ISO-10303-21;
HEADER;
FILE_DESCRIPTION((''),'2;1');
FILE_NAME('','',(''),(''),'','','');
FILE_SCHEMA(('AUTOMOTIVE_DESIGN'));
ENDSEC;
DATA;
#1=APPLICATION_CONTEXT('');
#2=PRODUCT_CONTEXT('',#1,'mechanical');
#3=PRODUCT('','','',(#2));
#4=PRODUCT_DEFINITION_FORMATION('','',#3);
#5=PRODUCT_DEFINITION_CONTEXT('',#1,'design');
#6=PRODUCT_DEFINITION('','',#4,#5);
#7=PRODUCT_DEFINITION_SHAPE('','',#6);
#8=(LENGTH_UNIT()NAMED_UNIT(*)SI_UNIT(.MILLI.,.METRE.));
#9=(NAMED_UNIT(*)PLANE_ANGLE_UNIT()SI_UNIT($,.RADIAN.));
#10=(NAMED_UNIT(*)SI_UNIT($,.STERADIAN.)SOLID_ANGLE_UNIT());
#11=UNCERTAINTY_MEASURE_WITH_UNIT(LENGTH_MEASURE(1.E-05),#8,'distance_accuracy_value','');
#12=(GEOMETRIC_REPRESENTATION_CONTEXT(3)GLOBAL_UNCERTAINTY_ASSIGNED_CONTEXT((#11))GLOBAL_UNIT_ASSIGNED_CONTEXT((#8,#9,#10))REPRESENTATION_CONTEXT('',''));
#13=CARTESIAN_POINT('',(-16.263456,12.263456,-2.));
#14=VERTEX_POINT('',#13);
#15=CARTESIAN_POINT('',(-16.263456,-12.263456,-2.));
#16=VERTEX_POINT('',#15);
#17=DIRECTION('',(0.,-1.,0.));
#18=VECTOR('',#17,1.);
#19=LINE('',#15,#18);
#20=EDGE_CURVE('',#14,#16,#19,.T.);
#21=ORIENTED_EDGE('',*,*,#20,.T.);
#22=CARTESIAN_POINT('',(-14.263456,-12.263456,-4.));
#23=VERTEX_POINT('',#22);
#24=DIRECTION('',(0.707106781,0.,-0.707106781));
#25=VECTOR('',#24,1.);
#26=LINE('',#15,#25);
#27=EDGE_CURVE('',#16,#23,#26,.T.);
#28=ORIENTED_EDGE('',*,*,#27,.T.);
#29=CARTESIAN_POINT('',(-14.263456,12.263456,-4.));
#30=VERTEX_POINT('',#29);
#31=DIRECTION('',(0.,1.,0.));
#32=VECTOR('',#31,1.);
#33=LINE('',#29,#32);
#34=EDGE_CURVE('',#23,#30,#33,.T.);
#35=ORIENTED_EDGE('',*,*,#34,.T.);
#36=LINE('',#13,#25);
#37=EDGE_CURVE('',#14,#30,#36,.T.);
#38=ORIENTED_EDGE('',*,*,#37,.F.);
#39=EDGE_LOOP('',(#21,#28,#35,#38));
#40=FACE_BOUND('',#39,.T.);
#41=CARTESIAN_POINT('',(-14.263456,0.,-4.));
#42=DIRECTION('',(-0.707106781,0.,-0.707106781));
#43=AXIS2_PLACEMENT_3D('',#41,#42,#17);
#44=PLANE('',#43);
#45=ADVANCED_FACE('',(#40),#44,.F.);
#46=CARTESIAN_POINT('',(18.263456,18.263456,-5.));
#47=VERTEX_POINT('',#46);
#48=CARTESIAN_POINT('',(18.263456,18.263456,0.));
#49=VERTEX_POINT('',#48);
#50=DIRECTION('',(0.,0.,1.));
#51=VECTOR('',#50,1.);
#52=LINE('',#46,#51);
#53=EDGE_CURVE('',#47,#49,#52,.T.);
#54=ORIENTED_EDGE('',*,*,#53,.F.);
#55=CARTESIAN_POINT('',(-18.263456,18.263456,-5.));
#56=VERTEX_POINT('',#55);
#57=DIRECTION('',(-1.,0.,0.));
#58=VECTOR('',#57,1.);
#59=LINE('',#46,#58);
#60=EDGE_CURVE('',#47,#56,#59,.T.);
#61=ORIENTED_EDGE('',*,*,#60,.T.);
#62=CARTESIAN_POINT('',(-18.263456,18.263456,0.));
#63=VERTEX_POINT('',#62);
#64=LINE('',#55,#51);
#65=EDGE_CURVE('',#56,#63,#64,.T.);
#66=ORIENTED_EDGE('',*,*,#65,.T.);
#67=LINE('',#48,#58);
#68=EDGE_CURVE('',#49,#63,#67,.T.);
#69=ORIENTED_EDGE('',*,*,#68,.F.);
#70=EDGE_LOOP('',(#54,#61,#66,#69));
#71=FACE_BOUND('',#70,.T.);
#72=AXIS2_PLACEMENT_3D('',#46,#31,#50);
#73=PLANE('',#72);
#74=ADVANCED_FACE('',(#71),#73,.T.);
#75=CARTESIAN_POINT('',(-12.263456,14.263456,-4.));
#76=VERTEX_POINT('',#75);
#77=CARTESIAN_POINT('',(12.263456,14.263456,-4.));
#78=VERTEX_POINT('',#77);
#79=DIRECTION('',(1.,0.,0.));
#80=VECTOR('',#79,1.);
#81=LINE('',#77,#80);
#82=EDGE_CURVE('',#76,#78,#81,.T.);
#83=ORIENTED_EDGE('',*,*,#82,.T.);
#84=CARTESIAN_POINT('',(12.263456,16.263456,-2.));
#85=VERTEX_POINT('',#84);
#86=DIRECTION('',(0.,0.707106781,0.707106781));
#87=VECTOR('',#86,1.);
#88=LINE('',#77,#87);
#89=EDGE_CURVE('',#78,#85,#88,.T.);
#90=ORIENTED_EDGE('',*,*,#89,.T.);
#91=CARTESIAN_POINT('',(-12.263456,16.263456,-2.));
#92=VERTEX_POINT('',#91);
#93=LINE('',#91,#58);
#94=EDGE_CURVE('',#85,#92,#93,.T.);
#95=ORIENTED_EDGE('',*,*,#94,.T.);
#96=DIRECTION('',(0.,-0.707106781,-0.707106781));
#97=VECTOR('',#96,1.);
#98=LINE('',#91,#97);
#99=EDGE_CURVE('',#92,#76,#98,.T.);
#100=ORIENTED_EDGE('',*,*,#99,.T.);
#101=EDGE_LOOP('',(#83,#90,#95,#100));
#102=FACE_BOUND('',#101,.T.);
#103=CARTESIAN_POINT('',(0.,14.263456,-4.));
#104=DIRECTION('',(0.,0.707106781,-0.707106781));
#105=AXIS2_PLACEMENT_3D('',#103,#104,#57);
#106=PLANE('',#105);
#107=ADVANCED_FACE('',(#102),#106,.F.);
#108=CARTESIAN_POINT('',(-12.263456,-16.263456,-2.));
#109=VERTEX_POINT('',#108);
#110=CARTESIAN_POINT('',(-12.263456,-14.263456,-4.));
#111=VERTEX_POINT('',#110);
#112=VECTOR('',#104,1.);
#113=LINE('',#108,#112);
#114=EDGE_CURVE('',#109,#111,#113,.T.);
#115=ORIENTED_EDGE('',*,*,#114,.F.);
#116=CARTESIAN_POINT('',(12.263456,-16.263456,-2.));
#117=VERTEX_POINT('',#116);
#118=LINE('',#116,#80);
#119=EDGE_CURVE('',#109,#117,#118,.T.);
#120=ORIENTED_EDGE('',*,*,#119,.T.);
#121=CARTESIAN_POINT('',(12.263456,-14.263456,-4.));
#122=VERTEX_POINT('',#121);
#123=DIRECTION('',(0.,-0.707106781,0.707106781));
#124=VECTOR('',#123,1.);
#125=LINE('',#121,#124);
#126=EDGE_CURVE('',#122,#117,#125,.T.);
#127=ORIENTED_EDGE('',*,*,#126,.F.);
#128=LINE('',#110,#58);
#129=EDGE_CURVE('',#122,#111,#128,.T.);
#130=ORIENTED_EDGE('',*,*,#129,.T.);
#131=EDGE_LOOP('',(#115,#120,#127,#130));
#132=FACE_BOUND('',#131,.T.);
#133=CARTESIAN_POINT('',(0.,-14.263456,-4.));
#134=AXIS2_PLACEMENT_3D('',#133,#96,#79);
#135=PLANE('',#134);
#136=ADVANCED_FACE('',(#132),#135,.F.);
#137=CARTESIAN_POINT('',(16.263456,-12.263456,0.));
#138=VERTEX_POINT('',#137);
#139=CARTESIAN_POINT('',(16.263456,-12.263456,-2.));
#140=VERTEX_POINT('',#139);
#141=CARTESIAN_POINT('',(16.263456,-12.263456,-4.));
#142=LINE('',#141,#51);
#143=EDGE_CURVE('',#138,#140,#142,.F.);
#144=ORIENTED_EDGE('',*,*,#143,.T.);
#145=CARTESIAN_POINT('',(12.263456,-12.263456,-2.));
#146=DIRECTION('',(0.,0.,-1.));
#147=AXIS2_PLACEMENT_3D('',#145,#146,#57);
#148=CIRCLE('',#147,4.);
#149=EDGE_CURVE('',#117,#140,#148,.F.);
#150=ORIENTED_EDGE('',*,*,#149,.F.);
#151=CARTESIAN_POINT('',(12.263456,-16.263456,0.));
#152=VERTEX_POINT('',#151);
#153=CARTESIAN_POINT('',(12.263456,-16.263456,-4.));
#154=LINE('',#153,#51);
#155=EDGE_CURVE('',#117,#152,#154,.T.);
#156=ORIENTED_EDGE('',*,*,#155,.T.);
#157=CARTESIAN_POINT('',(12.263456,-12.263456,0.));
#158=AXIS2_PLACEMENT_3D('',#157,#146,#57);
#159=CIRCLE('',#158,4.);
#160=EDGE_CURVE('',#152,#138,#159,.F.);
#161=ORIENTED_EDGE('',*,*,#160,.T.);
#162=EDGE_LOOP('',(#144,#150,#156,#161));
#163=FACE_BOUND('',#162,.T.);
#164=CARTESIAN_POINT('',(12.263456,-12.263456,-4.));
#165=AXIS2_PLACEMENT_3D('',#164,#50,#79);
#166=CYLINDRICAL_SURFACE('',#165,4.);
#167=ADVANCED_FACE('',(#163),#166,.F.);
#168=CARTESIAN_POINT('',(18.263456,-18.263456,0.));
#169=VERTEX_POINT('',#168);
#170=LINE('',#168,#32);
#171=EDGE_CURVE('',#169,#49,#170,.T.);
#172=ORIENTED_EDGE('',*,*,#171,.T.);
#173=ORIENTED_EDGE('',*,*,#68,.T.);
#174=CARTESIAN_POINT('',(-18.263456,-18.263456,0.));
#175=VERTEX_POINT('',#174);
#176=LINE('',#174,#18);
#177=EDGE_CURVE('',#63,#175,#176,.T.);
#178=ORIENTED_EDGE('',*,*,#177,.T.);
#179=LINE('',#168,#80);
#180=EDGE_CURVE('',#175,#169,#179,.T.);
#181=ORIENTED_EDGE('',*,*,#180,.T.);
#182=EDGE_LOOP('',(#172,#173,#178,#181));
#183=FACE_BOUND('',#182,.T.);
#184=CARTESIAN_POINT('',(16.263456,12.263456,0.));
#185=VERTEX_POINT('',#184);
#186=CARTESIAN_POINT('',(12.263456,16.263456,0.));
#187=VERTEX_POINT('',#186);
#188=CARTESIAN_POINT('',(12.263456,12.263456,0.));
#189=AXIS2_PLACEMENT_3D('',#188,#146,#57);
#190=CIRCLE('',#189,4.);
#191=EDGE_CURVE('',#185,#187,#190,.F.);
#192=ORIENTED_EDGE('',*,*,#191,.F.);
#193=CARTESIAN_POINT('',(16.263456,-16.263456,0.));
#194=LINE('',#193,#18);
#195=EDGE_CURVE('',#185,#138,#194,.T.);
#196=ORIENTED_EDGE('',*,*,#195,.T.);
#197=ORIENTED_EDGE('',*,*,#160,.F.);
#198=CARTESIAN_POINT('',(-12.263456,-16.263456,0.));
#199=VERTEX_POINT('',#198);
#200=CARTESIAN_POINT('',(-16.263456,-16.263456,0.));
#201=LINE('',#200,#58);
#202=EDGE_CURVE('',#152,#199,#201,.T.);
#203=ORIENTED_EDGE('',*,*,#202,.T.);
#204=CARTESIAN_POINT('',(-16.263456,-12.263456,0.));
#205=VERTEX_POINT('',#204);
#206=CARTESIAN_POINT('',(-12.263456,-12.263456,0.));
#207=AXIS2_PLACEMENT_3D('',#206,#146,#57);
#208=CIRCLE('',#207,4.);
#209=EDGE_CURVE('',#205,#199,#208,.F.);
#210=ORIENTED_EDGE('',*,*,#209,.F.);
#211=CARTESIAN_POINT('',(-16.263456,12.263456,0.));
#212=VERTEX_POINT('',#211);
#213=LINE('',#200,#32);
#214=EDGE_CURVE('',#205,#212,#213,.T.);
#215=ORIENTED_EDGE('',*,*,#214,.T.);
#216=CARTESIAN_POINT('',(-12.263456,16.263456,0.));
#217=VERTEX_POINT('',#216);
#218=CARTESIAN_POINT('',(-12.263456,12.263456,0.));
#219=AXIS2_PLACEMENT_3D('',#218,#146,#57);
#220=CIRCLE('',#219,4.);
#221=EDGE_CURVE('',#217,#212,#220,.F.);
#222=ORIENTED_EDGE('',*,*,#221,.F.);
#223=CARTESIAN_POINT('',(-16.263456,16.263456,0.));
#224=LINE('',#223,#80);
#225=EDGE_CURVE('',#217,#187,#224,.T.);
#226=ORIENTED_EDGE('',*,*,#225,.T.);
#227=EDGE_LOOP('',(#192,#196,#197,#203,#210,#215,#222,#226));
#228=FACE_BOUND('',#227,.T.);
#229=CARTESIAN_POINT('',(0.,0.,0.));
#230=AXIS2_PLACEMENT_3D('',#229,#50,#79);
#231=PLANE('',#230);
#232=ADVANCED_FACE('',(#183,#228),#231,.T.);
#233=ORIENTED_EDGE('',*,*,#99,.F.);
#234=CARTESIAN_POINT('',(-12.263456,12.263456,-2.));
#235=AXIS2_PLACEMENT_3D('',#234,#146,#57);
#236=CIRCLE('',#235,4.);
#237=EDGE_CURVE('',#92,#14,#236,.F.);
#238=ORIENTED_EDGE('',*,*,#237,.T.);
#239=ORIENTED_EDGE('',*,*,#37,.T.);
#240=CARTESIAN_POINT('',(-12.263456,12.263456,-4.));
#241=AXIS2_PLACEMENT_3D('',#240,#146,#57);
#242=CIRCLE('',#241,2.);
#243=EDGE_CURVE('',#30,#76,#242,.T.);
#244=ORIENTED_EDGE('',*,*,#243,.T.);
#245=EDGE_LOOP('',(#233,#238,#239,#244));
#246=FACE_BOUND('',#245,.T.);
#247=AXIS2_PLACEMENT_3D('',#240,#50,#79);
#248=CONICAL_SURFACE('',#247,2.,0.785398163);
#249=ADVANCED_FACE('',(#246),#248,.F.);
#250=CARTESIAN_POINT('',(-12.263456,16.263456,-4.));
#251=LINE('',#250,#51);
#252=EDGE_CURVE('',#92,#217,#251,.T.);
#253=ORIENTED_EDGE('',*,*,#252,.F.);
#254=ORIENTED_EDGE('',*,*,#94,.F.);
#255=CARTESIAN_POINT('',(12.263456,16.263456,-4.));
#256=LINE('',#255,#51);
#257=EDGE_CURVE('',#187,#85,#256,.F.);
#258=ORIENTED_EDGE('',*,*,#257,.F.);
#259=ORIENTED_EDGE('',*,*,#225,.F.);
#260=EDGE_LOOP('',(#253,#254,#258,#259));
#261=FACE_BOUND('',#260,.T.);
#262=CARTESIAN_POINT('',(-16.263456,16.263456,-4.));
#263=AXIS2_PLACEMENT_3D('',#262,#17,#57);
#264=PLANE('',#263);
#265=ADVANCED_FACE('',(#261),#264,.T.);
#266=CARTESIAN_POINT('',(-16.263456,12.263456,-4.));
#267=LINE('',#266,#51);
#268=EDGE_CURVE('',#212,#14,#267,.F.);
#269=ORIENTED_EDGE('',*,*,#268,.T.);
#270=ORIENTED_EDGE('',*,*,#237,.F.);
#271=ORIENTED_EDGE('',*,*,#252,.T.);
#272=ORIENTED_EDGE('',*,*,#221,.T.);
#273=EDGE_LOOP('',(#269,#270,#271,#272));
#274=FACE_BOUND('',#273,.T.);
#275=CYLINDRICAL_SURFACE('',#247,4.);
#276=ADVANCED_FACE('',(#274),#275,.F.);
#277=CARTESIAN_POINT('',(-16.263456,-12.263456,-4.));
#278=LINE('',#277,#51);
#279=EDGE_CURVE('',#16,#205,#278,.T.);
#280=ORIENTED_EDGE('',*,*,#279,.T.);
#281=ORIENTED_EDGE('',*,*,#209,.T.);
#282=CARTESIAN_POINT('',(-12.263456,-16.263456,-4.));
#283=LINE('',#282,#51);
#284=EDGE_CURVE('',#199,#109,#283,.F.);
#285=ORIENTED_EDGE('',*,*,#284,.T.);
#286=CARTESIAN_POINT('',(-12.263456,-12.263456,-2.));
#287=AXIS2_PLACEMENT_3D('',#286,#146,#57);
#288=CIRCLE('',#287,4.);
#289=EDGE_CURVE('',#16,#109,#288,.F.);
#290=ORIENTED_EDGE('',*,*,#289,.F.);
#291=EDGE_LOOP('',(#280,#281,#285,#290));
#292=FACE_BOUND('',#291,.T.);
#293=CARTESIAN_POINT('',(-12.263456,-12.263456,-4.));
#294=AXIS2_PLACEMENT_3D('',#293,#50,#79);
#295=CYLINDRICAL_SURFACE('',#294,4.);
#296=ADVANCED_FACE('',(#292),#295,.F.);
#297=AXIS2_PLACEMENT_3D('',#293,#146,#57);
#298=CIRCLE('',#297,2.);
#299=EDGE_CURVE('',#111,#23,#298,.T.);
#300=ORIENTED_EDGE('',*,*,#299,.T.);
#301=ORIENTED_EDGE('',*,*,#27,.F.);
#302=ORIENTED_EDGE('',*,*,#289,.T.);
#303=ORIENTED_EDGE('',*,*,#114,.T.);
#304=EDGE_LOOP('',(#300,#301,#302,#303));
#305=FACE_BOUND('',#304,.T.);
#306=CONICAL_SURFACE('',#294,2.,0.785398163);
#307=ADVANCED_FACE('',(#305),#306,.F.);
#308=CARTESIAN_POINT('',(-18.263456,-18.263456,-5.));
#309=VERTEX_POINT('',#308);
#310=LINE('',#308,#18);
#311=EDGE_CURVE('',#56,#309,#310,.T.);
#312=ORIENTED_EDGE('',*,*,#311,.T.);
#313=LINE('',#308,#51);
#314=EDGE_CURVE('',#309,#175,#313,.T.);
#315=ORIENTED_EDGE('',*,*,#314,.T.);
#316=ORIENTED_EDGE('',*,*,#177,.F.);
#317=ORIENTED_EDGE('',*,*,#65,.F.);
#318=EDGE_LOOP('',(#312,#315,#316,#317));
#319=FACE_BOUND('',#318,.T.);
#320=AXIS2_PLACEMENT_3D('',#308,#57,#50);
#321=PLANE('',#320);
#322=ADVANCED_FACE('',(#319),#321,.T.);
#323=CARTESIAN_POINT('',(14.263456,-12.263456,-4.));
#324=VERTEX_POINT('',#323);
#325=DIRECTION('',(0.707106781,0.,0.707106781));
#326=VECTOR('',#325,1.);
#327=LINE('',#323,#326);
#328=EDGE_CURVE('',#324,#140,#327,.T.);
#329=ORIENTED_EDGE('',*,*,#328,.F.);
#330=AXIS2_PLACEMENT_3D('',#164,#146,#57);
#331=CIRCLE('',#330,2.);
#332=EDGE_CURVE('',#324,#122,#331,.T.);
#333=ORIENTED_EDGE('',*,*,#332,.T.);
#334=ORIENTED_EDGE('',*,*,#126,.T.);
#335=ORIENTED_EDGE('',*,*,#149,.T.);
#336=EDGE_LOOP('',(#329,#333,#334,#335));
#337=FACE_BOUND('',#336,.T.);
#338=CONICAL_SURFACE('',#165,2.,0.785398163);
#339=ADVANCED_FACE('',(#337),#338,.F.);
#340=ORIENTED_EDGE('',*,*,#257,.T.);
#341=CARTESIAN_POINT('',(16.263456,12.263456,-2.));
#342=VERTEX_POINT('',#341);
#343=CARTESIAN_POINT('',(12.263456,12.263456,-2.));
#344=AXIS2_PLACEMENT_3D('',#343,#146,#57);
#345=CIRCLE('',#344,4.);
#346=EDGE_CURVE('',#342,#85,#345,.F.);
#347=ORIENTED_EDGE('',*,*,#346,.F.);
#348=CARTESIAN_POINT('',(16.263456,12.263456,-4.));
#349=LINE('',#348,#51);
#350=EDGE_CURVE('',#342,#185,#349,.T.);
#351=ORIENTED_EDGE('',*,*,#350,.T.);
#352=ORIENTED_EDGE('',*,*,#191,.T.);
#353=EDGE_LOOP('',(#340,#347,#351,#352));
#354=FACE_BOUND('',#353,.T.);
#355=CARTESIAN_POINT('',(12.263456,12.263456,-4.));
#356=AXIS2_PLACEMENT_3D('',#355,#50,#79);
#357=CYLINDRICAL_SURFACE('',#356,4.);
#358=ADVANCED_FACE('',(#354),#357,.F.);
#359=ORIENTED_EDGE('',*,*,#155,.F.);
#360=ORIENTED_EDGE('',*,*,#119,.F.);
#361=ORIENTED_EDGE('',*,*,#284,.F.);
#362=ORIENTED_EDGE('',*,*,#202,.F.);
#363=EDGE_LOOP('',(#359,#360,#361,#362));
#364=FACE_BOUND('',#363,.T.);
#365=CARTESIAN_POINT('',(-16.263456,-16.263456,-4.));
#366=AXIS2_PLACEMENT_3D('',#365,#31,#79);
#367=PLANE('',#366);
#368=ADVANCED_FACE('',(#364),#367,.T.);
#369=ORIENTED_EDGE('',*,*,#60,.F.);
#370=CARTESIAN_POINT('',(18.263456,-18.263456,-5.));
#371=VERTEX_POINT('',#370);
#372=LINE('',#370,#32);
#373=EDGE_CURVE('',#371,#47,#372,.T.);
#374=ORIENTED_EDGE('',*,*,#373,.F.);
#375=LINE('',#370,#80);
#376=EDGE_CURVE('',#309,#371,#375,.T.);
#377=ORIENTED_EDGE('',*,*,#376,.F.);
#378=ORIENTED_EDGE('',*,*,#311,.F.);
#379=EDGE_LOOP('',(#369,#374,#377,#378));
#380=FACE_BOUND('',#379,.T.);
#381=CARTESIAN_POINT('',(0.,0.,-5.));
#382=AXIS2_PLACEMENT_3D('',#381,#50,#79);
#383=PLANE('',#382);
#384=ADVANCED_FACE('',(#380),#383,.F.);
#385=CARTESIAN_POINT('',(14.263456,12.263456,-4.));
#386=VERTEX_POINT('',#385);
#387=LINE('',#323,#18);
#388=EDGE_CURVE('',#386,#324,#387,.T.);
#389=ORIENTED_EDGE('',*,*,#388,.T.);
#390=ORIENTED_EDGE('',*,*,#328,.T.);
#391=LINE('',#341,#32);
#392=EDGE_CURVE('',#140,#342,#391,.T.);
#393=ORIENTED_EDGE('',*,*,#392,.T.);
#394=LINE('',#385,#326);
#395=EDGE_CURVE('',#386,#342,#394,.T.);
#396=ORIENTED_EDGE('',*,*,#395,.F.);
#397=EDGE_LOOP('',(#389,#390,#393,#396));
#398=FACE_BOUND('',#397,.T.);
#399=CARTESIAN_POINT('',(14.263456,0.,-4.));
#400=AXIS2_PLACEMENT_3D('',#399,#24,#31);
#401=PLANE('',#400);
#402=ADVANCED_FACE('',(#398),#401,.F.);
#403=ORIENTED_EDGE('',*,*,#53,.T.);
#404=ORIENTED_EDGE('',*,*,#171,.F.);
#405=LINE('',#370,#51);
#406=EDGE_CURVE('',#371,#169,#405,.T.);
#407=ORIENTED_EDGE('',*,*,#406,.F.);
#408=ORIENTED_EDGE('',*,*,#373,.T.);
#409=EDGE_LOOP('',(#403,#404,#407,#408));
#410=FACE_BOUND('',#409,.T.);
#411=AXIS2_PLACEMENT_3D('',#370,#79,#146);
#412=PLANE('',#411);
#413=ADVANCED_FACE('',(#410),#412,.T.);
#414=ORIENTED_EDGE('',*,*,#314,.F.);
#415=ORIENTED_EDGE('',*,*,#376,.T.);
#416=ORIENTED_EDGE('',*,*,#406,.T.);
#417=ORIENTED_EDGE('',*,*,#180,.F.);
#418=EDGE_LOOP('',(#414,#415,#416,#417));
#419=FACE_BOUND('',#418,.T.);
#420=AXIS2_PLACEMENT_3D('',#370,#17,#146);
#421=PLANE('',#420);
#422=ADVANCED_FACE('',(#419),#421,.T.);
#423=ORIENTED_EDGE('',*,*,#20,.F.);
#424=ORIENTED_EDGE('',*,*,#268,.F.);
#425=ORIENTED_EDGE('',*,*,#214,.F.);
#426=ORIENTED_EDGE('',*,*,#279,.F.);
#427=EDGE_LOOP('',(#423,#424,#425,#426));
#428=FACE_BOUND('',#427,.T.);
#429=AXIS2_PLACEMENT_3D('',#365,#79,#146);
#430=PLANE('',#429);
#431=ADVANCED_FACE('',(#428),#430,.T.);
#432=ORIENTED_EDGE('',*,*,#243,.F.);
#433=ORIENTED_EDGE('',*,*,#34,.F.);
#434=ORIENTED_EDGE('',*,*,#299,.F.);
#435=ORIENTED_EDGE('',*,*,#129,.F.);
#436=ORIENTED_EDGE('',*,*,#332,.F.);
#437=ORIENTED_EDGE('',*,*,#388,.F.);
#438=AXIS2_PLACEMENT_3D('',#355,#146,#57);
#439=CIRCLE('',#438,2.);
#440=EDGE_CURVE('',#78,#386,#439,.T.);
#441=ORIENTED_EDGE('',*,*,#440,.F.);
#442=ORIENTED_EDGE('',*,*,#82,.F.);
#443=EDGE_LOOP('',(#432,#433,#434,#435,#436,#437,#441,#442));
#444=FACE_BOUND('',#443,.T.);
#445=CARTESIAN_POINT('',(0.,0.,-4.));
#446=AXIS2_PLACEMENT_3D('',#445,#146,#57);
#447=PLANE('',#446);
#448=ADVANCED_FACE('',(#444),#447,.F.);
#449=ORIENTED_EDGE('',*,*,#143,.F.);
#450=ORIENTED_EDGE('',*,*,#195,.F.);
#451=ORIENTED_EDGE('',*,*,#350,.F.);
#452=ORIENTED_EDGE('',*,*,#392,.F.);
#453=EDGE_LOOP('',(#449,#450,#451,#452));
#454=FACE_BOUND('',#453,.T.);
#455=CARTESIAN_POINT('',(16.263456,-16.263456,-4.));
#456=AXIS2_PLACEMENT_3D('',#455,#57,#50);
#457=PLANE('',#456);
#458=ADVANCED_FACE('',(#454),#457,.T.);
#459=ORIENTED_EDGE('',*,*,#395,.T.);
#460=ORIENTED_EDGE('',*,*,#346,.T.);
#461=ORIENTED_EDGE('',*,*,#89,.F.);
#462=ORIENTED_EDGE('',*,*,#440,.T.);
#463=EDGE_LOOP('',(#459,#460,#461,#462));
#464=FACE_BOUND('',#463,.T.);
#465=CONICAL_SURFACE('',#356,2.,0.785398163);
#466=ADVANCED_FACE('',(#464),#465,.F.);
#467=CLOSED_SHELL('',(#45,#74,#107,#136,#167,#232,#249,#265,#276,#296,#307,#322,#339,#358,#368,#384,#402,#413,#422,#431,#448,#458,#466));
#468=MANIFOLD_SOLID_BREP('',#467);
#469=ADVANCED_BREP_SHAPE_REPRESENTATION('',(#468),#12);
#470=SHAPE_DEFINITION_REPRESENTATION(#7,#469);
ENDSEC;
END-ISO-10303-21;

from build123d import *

# Parameters (mm, degrees)
SKETCH1_W           = 36.526911934
SKETCH1_H           = 36.526911934
BOSS_EXTRUDE1_DEPTH = 5
CAVITY1_START       = -2
CAVITY1_DEPTH       = 2


with BuildPart() as part:
    # Sketch1 → Boss-Extrude1 (new body)
    with BuildSketch(Plane.XY):
        Rectangle(SKETCH1_W, SKETCH1_H)
    extrude(amount=-BOSS_EXTRUDE1_DEPTH)

    # Cavity1: read off the stored shape, not the designer's step
    # Cavity1 outline → Cavity1 (cut)
    with BuildSketch(Plane.XY.offset(CAVITY1_START)):
        with BuildLine():
            Line((16.263455967, -12.263455967), (16.263455967, 12.263455967))
            ThreePointArc((16.263455967, 12.263455967), (15.091883092, 15.091883092), (12.263455967, 16.263455967))
            Line((12.263455967, 16.263455967), (-12.263455967, 16.263455967))
            ThreePointArc((-12.263455967, 16.263455967), (-15.091883092, 15.091883092), (-16.263455967, 12.263455967))
            Line((-16.263455967, 12.263455967), (-16.263455967, -12.263455967))
            ThreePointArc((-16.263455967, -12.263455967), (-15.091883092, -15.091883092), (-12.263455967, -16.263455967))
            Line((-12.263455967, -16.263455967), (12.263455967, -16.263455967))
            ThreePointArc((12.263455967, -16.263455967), (15.091883092, -15.091883092), (16.263455967, -12.263455967))
        make_face()
    extrude(amount=CAVITY1_DEPTH, mode=Mode.SUBTRACT)

    # Cavity1 2: loft between two sections, ruled curve by curve
    cavity1_2_from = [
        Edge.make_three_point_arc((14.263455967, 12.263455967, -4), (13.67766953, 13.67766953, -4), (12.263455967, 14.263455967, -4)),
        Edge.make_three_point_arc((-12.263455967, 14.263455967, -4), (-13.67766953, 13.67766953, -4), (-14.263455967, 12.263455967, -4)),
        Edge.make_three_point_arc((12.263455967, -14.263455967, -4), (13.67766953, -13.67766953, -4), (14.263455967, -12.263455967, -4)),
        Edge.make_three_point_arc((-14.263455967, -12.263455967, -4), (-13.67766953, -13.67766953, -4), (-12.263455967, -14.263455967, -4)),
        Edge.make_line((-12.263455967, 14.263455967, -4), (12.263455967, 14.263455967, -4)),
        Edge.make_line((14.263455967, 12.263455967, -4), (14.263455967, -12.263455967, -4)),
        Edge.make_line((-14.263455967, 12.263455967, -4), (-14.263455967, -12.263455967, -4)),
        Edge.make_line((12.263455967, -14.263455967, -4), (-12.263455967, -14.263455967, -4)),
    ]
    cavity1_2_to = [
        Edge.make_three_point_arc((16.263455967, 12.263455967, -2), (15.091883092, 15.091883092, -2), (12.263455967, 16.263455967, -2)),
        Edge.make_three_point_arc((-12.263455967, 16.263455967, -2), (-15.091883092, 15.091883092, -2), (-16.263455967, 12.263455967, -2)),
        Edge.make_three_point_arc((12.263455967, -16.263455967, -2), (15.091883092, -15.091883092, -2), (16.263455967, -12.263455967, -2)),
        Edge.make_three_point_arc((-16.263455967, -12.263455967, -2), (-15.091883092, -15.091883092, -2), (-12.263455967, -16.263455967, -2)),
        Edge.make_line((-12.263455967, 16.263455967, -2), (12.263455967, 16.263455967, -2)),
        Edge.make_line((16.263455967, 12.263455967, -2), (16.263455967, -12.263455967, -2)),
        Edge.make_line((-16.263455967, 12.263455967, -2), (-16.263455967, -12.263455967, -2)),
        Edge.make_line((12.263455967, -16.263455967, -2), (-12.263455967, -16.263455967, -2)),
    ]
    cavity1_2 = Solid(Shell([*[Face.make_surface_from_curves(cavity1_2_from[k], cavity1_2_to[k]) for k in range(8)], Face(Wire(cavity1_2_from)), Face(Wire(cavity1_2_to))]))
    add(cavity1_2, mode=Mode.SUBTRACT)


solid = part.part
